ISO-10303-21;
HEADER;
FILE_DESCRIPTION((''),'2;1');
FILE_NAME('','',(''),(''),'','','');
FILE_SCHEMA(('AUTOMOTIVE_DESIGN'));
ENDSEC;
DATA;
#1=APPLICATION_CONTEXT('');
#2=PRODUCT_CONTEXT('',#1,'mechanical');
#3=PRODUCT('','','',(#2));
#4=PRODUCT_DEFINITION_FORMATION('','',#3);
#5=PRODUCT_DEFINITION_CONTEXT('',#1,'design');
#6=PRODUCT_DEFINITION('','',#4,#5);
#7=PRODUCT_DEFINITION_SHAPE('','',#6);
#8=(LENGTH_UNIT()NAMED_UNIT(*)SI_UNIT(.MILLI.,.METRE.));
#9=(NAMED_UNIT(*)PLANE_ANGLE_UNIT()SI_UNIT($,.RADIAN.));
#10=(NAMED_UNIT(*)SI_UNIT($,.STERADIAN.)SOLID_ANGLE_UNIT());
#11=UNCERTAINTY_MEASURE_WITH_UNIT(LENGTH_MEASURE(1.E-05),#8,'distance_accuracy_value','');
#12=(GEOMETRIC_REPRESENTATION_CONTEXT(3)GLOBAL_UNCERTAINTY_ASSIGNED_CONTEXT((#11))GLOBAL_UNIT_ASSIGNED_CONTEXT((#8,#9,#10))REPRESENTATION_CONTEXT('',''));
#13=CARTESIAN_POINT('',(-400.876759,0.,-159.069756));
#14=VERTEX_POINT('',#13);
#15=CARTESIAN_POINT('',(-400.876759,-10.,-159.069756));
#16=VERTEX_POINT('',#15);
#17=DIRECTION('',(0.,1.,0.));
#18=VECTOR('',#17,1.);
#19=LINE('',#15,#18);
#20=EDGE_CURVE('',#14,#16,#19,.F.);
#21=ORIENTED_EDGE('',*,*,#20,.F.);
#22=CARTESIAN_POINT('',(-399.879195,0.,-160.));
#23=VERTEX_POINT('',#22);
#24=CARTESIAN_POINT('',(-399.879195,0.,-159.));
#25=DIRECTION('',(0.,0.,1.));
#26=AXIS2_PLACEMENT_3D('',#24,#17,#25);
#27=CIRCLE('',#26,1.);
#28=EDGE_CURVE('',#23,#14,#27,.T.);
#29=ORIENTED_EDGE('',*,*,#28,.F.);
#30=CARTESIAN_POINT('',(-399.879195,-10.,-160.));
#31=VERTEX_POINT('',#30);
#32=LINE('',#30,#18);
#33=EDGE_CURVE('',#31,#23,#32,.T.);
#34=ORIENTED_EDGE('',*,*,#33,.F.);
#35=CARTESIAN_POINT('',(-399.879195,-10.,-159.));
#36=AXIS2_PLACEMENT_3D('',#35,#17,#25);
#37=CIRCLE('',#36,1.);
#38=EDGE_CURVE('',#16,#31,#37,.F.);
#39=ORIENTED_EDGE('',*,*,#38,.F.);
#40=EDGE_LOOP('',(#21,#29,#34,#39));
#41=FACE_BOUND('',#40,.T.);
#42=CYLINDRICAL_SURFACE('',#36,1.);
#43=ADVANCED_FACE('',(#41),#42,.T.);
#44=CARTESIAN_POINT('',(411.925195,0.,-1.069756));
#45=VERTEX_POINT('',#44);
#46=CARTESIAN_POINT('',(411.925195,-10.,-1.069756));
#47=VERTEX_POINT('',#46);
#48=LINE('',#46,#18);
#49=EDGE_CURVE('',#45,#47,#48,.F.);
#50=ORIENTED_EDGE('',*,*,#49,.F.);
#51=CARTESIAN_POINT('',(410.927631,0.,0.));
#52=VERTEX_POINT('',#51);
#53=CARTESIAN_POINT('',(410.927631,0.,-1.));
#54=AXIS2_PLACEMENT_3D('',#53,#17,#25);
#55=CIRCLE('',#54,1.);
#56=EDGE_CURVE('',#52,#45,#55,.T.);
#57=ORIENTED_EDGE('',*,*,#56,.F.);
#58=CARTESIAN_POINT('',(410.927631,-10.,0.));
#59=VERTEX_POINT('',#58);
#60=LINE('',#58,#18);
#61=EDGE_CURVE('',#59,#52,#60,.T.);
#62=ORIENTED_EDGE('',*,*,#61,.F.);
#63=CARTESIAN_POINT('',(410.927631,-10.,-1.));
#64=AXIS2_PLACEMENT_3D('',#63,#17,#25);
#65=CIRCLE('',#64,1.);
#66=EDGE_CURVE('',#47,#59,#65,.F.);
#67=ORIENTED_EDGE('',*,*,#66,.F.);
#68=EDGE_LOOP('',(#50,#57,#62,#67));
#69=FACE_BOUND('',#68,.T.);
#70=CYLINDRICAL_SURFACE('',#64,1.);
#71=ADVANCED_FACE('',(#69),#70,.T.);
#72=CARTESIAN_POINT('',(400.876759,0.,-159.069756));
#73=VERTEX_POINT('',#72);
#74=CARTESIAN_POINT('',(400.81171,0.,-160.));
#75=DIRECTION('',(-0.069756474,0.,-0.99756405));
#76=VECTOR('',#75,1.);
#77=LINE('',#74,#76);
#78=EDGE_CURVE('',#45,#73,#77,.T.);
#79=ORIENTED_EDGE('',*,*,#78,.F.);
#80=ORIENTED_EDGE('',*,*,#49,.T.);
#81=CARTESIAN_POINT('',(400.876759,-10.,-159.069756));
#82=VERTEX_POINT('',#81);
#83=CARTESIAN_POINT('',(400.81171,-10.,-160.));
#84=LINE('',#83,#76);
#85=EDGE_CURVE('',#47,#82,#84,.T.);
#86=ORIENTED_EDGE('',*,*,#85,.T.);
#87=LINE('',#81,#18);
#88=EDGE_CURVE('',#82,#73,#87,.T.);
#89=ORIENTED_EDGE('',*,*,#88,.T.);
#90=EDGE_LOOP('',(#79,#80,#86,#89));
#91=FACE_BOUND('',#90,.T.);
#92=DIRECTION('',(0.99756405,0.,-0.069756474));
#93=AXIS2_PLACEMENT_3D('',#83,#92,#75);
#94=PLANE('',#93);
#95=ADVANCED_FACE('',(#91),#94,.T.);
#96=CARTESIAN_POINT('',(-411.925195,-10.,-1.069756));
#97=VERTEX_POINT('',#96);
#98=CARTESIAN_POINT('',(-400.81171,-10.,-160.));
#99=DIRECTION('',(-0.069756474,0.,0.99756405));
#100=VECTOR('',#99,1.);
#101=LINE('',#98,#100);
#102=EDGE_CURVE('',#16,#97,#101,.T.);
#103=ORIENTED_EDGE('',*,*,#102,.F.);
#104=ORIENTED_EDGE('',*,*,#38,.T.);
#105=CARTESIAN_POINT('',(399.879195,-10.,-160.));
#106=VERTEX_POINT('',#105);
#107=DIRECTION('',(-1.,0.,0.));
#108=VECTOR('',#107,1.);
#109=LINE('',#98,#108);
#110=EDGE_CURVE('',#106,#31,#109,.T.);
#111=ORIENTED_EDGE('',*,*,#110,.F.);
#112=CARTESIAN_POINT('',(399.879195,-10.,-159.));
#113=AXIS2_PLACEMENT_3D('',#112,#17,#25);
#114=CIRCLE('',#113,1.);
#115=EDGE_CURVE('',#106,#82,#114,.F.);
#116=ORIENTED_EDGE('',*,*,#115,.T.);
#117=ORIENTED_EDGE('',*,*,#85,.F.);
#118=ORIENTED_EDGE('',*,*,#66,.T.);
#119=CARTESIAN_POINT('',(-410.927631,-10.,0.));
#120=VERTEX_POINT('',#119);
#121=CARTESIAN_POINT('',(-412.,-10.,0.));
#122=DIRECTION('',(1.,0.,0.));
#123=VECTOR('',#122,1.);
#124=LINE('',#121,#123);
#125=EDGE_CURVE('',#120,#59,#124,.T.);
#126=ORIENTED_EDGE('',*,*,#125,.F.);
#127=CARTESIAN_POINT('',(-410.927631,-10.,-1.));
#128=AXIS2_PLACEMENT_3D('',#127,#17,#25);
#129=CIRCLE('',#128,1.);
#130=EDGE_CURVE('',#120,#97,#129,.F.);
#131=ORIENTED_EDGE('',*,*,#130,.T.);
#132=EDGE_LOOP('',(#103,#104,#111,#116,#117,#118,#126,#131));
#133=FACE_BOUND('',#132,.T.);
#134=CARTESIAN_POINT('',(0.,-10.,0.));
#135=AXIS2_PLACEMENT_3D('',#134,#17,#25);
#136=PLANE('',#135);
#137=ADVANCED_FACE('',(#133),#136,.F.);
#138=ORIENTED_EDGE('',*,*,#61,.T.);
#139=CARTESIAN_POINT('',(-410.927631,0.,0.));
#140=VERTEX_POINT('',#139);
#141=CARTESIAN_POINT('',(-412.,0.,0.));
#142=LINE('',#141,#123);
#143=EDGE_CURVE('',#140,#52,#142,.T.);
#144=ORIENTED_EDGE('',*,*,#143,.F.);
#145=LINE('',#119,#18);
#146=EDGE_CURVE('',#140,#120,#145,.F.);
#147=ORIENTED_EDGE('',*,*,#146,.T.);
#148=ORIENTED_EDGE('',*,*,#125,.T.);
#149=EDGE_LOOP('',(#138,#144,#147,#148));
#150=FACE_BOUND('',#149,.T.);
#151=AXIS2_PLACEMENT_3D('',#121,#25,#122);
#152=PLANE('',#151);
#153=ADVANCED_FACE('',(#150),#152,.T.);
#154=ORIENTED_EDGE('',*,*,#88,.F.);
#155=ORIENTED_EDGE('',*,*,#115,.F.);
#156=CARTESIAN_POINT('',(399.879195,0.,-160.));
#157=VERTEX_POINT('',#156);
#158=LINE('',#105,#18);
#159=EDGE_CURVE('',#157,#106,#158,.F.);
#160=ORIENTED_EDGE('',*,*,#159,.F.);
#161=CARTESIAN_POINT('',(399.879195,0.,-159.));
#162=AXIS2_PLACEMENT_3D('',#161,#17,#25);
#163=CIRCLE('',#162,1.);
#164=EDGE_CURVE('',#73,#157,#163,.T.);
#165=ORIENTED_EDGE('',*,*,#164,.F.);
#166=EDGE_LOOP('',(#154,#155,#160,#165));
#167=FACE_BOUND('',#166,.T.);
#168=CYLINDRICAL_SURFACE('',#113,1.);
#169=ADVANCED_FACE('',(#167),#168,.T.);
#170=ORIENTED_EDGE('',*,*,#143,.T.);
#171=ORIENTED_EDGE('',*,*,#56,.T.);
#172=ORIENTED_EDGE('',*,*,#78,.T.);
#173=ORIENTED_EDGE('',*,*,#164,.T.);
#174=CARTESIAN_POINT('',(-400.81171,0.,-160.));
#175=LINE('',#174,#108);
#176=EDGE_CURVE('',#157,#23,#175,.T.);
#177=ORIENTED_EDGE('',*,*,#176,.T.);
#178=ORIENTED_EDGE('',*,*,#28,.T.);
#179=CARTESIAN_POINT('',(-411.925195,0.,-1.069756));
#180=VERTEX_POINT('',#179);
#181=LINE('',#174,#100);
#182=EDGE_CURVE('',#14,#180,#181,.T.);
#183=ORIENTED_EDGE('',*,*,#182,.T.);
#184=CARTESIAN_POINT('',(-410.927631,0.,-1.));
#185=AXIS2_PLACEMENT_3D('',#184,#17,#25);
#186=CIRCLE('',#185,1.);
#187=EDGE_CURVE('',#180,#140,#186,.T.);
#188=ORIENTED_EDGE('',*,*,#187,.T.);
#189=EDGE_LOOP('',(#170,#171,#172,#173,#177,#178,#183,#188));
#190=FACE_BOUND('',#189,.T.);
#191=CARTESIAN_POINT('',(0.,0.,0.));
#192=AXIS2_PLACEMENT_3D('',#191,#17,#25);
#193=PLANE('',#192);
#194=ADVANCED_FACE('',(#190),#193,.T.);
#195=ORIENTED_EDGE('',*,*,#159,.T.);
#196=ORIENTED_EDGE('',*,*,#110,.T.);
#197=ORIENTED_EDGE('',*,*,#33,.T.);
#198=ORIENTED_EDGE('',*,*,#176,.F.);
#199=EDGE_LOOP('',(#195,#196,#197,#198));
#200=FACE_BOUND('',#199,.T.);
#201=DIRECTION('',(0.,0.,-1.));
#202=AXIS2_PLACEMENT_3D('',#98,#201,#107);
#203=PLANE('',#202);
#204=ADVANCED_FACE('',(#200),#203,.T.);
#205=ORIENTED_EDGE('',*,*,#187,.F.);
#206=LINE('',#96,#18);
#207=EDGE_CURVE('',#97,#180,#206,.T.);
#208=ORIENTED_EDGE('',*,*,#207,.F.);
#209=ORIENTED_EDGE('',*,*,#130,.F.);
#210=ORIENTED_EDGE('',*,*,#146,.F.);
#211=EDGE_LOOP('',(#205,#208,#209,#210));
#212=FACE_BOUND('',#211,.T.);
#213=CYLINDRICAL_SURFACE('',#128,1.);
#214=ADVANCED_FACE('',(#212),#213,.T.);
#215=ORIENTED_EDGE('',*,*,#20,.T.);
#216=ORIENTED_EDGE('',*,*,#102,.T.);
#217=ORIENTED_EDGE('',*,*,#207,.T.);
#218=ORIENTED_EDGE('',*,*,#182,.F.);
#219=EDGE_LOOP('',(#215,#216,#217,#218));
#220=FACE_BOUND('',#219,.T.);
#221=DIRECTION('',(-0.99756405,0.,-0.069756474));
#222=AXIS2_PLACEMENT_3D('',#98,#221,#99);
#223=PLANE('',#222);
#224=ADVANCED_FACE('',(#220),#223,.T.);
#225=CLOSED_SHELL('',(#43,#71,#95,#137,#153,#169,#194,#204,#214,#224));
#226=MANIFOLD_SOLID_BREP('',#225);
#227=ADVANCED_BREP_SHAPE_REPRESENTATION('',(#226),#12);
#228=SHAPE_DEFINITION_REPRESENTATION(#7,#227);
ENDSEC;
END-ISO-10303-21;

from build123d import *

# Parameters (mm, degrees)
BASE_FLANGE1_DEPTH = 10
FILLET_1_0_R       = 1


# Sheet-metal steps are written as plain solids
with BuildPart() as part:
    # Sketch1 → Base-Flange1 (new body)
    with BuildSketch(Plane(origin=(0, 0, 0), x_dir=(1, 0, 0), z_dir=(0, 1, 0))):
        Polygon((-400.811710089, 160), (400.811710089, 160), (412, 0), (-412, 0), align=None)
    extrude(amount=-BASE_FLANGE1_DEPTH)

    # Fillet-1.0
    fillet_1_0_edges = [part.edges().sort_by_distance(p)[0] for p in [
        (-400.811710089, -5, -160),
        (400.811710089, -5, -160),
        (412, -5, 0),
        (-412, -5, 0),
    ]]
    fillet(fillet_1_0_edges, radius=FILLET_1_0_R)


solid = part.part
